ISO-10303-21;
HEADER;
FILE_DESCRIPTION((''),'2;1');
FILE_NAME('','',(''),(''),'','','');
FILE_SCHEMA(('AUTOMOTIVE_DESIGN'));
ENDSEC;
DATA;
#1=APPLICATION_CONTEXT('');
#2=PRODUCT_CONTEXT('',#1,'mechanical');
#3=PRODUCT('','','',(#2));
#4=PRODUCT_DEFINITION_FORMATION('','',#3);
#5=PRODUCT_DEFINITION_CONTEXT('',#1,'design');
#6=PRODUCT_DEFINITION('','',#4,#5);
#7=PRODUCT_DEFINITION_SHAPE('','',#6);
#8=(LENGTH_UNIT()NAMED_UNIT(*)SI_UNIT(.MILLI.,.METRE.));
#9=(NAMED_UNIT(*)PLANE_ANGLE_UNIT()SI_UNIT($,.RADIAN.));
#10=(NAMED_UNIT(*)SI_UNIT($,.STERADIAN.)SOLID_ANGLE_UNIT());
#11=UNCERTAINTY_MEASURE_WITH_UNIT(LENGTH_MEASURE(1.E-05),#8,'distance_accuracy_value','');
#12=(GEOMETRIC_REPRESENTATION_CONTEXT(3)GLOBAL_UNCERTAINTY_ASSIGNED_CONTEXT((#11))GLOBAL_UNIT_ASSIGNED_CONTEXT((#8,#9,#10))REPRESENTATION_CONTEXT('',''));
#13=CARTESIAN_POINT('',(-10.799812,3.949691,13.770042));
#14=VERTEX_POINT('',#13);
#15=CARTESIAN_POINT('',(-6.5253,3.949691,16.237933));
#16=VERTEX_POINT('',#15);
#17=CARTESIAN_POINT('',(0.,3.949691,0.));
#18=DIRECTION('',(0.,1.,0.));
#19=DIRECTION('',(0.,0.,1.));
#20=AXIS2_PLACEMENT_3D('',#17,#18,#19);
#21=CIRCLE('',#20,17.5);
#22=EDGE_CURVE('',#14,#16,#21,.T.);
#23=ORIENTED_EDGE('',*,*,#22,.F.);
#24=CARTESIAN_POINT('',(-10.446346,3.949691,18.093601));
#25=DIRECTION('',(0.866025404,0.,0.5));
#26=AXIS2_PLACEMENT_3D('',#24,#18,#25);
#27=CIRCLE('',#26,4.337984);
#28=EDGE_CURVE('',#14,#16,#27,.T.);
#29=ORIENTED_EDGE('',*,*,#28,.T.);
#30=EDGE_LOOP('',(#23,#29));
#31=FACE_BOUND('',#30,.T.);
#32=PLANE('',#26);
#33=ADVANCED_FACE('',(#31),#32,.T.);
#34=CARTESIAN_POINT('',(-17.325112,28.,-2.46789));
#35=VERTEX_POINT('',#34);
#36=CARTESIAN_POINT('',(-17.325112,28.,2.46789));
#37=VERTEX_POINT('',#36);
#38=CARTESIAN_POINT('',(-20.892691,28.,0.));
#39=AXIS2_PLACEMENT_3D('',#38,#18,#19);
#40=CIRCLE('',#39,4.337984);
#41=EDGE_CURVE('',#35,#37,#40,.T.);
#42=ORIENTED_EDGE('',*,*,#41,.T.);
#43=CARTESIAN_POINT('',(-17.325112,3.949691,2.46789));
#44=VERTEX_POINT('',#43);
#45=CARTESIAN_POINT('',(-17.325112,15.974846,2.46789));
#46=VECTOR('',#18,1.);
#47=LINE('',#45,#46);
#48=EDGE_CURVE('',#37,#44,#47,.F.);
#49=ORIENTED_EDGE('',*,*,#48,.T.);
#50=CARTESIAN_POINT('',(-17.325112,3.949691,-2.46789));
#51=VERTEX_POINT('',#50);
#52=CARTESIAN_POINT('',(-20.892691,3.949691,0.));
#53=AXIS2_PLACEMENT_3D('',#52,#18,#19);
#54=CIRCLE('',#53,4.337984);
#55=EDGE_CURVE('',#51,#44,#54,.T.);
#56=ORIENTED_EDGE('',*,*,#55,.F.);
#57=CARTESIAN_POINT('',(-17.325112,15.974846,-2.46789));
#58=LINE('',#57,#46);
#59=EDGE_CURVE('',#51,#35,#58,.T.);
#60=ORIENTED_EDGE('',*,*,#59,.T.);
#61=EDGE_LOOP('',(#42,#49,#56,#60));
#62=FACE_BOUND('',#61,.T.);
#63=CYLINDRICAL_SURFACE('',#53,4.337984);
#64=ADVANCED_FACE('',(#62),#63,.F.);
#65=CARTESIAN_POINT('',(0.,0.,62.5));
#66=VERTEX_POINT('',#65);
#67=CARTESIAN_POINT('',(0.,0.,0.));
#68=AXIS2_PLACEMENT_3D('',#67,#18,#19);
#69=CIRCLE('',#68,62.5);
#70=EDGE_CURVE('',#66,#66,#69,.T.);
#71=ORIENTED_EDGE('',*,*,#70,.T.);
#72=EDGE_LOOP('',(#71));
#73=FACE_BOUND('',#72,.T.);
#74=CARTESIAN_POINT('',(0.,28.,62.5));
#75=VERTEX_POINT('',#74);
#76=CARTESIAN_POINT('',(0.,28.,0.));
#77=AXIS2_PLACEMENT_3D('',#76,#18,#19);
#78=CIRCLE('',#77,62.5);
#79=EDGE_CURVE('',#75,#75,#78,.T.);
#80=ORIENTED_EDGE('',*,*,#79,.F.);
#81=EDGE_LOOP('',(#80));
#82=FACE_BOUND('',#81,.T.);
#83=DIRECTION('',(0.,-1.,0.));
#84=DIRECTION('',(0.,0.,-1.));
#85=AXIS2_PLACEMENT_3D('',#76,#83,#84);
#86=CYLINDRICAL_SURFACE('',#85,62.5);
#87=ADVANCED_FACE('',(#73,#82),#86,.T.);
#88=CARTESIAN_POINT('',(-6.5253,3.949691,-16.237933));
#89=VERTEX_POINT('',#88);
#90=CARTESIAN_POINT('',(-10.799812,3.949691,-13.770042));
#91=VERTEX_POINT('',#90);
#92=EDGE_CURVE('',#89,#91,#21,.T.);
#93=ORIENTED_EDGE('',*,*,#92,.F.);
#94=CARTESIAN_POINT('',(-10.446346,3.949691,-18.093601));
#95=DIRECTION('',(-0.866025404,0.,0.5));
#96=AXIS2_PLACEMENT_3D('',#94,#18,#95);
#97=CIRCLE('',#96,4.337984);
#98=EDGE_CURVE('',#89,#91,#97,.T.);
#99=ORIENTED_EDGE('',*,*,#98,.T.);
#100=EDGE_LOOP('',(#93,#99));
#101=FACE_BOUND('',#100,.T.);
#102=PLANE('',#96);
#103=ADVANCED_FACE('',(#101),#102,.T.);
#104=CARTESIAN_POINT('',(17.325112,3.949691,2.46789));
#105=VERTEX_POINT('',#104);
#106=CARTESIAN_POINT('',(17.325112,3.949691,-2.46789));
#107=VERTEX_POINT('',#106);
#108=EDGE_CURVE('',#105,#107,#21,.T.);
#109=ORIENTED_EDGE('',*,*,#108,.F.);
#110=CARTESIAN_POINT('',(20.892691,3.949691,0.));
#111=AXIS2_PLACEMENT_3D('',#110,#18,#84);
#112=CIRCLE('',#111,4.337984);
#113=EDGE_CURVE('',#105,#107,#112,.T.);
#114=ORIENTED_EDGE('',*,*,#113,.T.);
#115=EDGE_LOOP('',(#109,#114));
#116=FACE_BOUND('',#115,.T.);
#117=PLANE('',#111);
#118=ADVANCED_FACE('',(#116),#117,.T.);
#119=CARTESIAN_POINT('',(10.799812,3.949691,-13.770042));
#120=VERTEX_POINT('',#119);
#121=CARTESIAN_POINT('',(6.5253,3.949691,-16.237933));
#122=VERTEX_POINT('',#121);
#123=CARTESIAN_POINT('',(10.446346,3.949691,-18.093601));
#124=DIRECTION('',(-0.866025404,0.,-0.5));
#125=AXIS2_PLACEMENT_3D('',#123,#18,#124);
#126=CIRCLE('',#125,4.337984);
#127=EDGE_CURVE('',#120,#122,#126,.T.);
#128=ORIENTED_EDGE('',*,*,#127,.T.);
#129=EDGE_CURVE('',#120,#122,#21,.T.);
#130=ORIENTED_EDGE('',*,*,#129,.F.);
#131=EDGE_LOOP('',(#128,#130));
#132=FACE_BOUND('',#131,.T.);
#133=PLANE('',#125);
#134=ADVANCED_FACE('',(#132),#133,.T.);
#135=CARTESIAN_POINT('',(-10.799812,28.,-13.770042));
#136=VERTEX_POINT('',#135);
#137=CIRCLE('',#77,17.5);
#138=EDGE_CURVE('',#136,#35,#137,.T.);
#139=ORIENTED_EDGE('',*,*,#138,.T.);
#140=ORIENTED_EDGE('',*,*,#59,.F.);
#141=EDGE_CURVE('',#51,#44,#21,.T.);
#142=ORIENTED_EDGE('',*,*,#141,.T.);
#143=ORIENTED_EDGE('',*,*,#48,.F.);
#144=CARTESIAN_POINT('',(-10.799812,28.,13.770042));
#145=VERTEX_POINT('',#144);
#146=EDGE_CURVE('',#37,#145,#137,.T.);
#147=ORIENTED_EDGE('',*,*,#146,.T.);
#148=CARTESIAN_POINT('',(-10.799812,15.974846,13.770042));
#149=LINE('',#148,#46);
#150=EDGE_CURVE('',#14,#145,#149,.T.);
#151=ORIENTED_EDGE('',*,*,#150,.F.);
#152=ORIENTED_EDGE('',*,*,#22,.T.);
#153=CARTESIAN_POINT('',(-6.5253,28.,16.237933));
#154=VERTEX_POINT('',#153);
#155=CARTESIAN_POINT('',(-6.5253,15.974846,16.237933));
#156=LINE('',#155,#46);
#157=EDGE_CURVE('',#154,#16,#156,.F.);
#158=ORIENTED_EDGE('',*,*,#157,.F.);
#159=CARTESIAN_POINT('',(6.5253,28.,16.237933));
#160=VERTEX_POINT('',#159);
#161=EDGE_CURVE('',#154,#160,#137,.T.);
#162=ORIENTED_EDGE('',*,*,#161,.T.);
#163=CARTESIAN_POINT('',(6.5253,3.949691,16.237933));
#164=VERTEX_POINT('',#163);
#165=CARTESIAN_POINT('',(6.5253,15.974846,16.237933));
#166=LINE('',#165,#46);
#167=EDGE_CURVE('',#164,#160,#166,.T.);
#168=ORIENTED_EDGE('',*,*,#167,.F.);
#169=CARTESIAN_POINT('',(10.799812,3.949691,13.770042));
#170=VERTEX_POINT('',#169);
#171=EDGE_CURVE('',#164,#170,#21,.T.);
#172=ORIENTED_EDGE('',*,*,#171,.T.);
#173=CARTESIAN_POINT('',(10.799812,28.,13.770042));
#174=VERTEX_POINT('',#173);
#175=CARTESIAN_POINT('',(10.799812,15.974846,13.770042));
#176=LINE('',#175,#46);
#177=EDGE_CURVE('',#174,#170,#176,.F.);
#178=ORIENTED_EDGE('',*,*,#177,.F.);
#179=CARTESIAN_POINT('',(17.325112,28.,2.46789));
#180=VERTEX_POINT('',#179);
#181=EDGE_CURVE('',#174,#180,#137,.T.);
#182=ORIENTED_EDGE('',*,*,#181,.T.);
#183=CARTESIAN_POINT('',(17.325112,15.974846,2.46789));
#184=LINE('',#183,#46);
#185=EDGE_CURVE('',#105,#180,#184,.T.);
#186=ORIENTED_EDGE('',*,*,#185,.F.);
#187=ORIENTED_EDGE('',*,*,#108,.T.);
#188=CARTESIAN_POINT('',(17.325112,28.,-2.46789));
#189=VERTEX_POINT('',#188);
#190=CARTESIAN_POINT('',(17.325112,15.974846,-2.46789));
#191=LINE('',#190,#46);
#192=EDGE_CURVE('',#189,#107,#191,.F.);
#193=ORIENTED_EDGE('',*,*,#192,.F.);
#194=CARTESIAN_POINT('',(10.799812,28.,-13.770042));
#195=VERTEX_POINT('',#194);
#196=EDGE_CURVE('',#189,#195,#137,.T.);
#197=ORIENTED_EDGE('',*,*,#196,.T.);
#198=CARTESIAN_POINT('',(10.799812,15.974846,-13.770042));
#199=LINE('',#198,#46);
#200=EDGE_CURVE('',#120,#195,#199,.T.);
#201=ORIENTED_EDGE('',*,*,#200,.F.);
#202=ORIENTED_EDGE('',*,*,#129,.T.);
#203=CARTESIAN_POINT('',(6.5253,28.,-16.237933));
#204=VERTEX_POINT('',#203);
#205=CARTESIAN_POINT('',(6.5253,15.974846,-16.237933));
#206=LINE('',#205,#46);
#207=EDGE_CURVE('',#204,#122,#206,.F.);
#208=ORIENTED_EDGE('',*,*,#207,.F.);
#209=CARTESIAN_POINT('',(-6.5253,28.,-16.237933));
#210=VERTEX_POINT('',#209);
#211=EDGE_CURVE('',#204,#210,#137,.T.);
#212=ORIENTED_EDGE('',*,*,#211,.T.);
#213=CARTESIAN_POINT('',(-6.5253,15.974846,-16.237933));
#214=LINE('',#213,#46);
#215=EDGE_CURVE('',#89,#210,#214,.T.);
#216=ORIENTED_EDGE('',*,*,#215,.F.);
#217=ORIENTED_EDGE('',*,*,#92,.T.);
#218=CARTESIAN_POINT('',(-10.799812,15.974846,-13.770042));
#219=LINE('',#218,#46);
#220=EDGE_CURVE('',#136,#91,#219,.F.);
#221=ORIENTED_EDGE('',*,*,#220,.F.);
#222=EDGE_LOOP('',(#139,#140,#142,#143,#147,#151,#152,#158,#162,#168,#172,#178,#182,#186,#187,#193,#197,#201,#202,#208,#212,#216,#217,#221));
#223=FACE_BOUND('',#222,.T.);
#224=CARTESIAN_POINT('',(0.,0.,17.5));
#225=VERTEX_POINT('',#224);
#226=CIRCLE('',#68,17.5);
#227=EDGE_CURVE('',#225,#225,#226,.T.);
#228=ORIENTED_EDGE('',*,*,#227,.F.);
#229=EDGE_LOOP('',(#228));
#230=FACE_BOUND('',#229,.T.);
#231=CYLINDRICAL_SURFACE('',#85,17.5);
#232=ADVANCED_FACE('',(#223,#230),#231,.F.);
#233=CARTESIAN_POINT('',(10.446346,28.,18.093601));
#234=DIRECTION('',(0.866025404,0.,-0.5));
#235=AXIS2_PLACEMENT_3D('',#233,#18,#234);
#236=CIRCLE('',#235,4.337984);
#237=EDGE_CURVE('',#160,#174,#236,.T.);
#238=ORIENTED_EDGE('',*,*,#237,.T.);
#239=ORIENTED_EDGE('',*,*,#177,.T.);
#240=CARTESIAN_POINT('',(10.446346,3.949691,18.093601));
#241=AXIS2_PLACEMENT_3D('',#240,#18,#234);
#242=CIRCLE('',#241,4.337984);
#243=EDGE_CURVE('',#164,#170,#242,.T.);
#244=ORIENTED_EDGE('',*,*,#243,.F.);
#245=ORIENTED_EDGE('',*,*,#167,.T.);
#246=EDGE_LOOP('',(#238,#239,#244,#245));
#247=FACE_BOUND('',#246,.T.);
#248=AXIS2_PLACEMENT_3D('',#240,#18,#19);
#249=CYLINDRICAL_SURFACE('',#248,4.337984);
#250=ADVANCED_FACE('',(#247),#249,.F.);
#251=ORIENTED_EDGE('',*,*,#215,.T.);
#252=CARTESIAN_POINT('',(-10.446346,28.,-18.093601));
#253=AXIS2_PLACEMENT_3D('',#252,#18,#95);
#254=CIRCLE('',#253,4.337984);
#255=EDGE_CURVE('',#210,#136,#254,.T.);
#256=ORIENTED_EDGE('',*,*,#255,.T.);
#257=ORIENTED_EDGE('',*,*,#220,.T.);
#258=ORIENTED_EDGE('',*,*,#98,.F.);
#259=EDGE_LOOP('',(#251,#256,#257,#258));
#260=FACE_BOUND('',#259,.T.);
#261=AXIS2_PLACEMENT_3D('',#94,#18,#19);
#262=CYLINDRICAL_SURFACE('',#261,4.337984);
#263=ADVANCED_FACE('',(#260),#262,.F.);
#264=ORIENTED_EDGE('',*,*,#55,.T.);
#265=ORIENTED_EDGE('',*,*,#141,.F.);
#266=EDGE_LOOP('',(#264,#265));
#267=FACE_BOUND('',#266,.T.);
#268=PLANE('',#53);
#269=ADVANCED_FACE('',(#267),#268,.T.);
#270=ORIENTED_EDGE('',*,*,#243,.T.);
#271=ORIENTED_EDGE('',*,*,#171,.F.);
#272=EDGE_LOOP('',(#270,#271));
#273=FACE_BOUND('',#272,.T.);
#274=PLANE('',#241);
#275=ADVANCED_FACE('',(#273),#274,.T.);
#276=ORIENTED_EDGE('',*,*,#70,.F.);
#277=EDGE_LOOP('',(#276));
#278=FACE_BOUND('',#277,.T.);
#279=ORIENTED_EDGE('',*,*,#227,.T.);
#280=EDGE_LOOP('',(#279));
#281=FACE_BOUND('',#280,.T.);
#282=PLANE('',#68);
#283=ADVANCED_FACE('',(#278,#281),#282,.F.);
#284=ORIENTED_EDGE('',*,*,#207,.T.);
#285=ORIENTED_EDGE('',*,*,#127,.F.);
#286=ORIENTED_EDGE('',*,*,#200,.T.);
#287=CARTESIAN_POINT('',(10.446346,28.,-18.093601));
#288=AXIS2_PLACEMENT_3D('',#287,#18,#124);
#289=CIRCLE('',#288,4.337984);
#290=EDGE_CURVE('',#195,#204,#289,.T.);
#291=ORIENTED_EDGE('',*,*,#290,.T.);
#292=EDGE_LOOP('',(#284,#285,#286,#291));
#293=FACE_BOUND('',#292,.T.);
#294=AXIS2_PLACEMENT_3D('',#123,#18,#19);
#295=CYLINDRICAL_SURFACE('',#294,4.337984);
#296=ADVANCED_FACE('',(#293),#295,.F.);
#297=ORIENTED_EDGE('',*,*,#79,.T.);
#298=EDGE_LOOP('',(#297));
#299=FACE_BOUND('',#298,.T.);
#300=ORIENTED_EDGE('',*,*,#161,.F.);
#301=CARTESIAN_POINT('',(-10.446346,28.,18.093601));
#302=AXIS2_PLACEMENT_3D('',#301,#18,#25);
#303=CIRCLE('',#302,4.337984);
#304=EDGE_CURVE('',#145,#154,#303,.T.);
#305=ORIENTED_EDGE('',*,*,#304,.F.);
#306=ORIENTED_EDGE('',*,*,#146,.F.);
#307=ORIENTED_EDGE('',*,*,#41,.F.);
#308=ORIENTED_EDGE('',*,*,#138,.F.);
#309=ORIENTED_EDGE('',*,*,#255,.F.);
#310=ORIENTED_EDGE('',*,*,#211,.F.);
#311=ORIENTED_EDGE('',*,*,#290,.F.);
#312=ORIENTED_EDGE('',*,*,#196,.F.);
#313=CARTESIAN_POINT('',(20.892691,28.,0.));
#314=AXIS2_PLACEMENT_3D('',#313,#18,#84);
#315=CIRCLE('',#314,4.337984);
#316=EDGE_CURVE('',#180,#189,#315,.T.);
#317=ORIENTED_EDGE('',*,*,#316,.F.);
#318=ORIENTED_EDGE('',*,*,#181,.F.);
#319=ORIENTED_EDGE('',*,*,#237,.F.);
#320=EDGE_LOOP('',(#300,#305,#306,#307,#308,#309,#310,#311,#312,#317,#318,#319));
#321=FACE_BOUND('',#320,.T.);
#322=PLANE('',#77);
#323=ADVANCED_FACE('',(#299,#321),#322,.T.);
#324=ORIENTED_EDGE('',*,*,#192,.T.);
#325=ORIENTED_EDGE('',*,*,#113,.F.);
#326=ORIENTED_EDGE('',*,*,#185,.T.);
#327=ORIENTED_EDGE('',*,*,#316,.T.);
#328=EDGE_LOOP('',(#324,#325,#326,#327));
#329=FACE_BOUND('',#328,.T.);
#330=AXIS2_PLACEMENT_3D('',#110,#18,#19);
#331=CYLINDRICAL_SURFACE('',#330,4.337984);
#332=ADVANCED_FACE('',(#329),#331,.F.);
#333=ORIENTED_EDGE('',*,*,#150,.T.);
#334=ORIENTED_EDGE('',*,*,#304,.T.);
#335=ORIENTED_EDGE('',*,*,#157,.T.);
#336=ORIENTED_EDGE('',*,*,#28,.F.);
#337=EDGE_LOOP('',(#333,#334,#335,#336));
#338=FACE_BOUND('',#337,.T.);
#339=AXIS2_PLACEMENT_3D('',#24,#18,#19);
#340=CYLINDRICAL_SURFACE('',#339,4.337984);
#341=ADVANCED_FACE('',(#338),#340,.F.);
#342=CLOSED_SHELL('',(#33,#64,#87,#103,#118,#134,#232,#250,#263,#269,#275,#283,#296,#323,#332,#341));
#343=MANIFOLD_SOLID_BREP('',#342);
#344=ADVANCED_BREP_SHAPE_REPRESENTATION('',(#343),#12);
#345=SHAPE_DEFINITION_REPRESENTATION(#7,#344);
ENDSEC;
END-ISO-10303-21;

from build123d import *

# Parameters (mm, degrees)
SKETCH1_R           = 62.5
BOSS_EXTRUDE1_DEPTH = 28
SKETCH2_R           = 17.5
CUT_EXTRUDE1_DEPTH  = 93.717312299
SKETCH3_R           = 4.337983505
CUT_EXTRUDE2_DEPTH  = 24.050308735
CIRPATTERN1_COUNT   = 6


with BuildPart() as part:
    # Sketch1 → Boss-Extrude1 (new body)
    with BuildSketch(Plane(origin=(0, 0, 0), x_dir=(1, 0, 0), z_dir=(0, 1, 0))):
        Circle(SKETCH1_R)
    extrude(amount=BOSS_EXTRUDE1_DEPTH)

    # Sketch2 → Cut-Extrude1 (cut, through all)
    with BuildSketch(Plane(origin=(0, 0, 0), x_dir=(1, 0, 0), z_dir=(0, 1, 0))):
        Circle(SKETCH2_R)
    extrude(amount=CUT_EXTRUDE1_DEPTH, mode=Mode.SUBTRACT)

    # Sketch3 → Cut-Extrude2 (cut)
    with BuildSketch(Plane(origin=(0, 28, 0), x_dir=(1, 0, 0), z_dir=(0, 1, 0))):
        with Locations((-20.892691055, 0)):
            Circle(SKETCH3_R)
    cut_extrude2 = extrude(amount=-CUT_EXTRUDE2_DEPTH, mode=Mode.SUBTRACT)

    # CirPattern1: Cut-Extrude2 ×6 about axis
    cirpattern1_axis = Axis((0, 0, 0), (0, 1, 0))
    for i in range(1, CIRPATTERN1_COUNT):
        add(cut_extrude2.rotate(cirpattern1_axis, i * 360 / CIRPATTERN1_COUNT), mode=Mode.SUBTRACT)


solid = part.part
